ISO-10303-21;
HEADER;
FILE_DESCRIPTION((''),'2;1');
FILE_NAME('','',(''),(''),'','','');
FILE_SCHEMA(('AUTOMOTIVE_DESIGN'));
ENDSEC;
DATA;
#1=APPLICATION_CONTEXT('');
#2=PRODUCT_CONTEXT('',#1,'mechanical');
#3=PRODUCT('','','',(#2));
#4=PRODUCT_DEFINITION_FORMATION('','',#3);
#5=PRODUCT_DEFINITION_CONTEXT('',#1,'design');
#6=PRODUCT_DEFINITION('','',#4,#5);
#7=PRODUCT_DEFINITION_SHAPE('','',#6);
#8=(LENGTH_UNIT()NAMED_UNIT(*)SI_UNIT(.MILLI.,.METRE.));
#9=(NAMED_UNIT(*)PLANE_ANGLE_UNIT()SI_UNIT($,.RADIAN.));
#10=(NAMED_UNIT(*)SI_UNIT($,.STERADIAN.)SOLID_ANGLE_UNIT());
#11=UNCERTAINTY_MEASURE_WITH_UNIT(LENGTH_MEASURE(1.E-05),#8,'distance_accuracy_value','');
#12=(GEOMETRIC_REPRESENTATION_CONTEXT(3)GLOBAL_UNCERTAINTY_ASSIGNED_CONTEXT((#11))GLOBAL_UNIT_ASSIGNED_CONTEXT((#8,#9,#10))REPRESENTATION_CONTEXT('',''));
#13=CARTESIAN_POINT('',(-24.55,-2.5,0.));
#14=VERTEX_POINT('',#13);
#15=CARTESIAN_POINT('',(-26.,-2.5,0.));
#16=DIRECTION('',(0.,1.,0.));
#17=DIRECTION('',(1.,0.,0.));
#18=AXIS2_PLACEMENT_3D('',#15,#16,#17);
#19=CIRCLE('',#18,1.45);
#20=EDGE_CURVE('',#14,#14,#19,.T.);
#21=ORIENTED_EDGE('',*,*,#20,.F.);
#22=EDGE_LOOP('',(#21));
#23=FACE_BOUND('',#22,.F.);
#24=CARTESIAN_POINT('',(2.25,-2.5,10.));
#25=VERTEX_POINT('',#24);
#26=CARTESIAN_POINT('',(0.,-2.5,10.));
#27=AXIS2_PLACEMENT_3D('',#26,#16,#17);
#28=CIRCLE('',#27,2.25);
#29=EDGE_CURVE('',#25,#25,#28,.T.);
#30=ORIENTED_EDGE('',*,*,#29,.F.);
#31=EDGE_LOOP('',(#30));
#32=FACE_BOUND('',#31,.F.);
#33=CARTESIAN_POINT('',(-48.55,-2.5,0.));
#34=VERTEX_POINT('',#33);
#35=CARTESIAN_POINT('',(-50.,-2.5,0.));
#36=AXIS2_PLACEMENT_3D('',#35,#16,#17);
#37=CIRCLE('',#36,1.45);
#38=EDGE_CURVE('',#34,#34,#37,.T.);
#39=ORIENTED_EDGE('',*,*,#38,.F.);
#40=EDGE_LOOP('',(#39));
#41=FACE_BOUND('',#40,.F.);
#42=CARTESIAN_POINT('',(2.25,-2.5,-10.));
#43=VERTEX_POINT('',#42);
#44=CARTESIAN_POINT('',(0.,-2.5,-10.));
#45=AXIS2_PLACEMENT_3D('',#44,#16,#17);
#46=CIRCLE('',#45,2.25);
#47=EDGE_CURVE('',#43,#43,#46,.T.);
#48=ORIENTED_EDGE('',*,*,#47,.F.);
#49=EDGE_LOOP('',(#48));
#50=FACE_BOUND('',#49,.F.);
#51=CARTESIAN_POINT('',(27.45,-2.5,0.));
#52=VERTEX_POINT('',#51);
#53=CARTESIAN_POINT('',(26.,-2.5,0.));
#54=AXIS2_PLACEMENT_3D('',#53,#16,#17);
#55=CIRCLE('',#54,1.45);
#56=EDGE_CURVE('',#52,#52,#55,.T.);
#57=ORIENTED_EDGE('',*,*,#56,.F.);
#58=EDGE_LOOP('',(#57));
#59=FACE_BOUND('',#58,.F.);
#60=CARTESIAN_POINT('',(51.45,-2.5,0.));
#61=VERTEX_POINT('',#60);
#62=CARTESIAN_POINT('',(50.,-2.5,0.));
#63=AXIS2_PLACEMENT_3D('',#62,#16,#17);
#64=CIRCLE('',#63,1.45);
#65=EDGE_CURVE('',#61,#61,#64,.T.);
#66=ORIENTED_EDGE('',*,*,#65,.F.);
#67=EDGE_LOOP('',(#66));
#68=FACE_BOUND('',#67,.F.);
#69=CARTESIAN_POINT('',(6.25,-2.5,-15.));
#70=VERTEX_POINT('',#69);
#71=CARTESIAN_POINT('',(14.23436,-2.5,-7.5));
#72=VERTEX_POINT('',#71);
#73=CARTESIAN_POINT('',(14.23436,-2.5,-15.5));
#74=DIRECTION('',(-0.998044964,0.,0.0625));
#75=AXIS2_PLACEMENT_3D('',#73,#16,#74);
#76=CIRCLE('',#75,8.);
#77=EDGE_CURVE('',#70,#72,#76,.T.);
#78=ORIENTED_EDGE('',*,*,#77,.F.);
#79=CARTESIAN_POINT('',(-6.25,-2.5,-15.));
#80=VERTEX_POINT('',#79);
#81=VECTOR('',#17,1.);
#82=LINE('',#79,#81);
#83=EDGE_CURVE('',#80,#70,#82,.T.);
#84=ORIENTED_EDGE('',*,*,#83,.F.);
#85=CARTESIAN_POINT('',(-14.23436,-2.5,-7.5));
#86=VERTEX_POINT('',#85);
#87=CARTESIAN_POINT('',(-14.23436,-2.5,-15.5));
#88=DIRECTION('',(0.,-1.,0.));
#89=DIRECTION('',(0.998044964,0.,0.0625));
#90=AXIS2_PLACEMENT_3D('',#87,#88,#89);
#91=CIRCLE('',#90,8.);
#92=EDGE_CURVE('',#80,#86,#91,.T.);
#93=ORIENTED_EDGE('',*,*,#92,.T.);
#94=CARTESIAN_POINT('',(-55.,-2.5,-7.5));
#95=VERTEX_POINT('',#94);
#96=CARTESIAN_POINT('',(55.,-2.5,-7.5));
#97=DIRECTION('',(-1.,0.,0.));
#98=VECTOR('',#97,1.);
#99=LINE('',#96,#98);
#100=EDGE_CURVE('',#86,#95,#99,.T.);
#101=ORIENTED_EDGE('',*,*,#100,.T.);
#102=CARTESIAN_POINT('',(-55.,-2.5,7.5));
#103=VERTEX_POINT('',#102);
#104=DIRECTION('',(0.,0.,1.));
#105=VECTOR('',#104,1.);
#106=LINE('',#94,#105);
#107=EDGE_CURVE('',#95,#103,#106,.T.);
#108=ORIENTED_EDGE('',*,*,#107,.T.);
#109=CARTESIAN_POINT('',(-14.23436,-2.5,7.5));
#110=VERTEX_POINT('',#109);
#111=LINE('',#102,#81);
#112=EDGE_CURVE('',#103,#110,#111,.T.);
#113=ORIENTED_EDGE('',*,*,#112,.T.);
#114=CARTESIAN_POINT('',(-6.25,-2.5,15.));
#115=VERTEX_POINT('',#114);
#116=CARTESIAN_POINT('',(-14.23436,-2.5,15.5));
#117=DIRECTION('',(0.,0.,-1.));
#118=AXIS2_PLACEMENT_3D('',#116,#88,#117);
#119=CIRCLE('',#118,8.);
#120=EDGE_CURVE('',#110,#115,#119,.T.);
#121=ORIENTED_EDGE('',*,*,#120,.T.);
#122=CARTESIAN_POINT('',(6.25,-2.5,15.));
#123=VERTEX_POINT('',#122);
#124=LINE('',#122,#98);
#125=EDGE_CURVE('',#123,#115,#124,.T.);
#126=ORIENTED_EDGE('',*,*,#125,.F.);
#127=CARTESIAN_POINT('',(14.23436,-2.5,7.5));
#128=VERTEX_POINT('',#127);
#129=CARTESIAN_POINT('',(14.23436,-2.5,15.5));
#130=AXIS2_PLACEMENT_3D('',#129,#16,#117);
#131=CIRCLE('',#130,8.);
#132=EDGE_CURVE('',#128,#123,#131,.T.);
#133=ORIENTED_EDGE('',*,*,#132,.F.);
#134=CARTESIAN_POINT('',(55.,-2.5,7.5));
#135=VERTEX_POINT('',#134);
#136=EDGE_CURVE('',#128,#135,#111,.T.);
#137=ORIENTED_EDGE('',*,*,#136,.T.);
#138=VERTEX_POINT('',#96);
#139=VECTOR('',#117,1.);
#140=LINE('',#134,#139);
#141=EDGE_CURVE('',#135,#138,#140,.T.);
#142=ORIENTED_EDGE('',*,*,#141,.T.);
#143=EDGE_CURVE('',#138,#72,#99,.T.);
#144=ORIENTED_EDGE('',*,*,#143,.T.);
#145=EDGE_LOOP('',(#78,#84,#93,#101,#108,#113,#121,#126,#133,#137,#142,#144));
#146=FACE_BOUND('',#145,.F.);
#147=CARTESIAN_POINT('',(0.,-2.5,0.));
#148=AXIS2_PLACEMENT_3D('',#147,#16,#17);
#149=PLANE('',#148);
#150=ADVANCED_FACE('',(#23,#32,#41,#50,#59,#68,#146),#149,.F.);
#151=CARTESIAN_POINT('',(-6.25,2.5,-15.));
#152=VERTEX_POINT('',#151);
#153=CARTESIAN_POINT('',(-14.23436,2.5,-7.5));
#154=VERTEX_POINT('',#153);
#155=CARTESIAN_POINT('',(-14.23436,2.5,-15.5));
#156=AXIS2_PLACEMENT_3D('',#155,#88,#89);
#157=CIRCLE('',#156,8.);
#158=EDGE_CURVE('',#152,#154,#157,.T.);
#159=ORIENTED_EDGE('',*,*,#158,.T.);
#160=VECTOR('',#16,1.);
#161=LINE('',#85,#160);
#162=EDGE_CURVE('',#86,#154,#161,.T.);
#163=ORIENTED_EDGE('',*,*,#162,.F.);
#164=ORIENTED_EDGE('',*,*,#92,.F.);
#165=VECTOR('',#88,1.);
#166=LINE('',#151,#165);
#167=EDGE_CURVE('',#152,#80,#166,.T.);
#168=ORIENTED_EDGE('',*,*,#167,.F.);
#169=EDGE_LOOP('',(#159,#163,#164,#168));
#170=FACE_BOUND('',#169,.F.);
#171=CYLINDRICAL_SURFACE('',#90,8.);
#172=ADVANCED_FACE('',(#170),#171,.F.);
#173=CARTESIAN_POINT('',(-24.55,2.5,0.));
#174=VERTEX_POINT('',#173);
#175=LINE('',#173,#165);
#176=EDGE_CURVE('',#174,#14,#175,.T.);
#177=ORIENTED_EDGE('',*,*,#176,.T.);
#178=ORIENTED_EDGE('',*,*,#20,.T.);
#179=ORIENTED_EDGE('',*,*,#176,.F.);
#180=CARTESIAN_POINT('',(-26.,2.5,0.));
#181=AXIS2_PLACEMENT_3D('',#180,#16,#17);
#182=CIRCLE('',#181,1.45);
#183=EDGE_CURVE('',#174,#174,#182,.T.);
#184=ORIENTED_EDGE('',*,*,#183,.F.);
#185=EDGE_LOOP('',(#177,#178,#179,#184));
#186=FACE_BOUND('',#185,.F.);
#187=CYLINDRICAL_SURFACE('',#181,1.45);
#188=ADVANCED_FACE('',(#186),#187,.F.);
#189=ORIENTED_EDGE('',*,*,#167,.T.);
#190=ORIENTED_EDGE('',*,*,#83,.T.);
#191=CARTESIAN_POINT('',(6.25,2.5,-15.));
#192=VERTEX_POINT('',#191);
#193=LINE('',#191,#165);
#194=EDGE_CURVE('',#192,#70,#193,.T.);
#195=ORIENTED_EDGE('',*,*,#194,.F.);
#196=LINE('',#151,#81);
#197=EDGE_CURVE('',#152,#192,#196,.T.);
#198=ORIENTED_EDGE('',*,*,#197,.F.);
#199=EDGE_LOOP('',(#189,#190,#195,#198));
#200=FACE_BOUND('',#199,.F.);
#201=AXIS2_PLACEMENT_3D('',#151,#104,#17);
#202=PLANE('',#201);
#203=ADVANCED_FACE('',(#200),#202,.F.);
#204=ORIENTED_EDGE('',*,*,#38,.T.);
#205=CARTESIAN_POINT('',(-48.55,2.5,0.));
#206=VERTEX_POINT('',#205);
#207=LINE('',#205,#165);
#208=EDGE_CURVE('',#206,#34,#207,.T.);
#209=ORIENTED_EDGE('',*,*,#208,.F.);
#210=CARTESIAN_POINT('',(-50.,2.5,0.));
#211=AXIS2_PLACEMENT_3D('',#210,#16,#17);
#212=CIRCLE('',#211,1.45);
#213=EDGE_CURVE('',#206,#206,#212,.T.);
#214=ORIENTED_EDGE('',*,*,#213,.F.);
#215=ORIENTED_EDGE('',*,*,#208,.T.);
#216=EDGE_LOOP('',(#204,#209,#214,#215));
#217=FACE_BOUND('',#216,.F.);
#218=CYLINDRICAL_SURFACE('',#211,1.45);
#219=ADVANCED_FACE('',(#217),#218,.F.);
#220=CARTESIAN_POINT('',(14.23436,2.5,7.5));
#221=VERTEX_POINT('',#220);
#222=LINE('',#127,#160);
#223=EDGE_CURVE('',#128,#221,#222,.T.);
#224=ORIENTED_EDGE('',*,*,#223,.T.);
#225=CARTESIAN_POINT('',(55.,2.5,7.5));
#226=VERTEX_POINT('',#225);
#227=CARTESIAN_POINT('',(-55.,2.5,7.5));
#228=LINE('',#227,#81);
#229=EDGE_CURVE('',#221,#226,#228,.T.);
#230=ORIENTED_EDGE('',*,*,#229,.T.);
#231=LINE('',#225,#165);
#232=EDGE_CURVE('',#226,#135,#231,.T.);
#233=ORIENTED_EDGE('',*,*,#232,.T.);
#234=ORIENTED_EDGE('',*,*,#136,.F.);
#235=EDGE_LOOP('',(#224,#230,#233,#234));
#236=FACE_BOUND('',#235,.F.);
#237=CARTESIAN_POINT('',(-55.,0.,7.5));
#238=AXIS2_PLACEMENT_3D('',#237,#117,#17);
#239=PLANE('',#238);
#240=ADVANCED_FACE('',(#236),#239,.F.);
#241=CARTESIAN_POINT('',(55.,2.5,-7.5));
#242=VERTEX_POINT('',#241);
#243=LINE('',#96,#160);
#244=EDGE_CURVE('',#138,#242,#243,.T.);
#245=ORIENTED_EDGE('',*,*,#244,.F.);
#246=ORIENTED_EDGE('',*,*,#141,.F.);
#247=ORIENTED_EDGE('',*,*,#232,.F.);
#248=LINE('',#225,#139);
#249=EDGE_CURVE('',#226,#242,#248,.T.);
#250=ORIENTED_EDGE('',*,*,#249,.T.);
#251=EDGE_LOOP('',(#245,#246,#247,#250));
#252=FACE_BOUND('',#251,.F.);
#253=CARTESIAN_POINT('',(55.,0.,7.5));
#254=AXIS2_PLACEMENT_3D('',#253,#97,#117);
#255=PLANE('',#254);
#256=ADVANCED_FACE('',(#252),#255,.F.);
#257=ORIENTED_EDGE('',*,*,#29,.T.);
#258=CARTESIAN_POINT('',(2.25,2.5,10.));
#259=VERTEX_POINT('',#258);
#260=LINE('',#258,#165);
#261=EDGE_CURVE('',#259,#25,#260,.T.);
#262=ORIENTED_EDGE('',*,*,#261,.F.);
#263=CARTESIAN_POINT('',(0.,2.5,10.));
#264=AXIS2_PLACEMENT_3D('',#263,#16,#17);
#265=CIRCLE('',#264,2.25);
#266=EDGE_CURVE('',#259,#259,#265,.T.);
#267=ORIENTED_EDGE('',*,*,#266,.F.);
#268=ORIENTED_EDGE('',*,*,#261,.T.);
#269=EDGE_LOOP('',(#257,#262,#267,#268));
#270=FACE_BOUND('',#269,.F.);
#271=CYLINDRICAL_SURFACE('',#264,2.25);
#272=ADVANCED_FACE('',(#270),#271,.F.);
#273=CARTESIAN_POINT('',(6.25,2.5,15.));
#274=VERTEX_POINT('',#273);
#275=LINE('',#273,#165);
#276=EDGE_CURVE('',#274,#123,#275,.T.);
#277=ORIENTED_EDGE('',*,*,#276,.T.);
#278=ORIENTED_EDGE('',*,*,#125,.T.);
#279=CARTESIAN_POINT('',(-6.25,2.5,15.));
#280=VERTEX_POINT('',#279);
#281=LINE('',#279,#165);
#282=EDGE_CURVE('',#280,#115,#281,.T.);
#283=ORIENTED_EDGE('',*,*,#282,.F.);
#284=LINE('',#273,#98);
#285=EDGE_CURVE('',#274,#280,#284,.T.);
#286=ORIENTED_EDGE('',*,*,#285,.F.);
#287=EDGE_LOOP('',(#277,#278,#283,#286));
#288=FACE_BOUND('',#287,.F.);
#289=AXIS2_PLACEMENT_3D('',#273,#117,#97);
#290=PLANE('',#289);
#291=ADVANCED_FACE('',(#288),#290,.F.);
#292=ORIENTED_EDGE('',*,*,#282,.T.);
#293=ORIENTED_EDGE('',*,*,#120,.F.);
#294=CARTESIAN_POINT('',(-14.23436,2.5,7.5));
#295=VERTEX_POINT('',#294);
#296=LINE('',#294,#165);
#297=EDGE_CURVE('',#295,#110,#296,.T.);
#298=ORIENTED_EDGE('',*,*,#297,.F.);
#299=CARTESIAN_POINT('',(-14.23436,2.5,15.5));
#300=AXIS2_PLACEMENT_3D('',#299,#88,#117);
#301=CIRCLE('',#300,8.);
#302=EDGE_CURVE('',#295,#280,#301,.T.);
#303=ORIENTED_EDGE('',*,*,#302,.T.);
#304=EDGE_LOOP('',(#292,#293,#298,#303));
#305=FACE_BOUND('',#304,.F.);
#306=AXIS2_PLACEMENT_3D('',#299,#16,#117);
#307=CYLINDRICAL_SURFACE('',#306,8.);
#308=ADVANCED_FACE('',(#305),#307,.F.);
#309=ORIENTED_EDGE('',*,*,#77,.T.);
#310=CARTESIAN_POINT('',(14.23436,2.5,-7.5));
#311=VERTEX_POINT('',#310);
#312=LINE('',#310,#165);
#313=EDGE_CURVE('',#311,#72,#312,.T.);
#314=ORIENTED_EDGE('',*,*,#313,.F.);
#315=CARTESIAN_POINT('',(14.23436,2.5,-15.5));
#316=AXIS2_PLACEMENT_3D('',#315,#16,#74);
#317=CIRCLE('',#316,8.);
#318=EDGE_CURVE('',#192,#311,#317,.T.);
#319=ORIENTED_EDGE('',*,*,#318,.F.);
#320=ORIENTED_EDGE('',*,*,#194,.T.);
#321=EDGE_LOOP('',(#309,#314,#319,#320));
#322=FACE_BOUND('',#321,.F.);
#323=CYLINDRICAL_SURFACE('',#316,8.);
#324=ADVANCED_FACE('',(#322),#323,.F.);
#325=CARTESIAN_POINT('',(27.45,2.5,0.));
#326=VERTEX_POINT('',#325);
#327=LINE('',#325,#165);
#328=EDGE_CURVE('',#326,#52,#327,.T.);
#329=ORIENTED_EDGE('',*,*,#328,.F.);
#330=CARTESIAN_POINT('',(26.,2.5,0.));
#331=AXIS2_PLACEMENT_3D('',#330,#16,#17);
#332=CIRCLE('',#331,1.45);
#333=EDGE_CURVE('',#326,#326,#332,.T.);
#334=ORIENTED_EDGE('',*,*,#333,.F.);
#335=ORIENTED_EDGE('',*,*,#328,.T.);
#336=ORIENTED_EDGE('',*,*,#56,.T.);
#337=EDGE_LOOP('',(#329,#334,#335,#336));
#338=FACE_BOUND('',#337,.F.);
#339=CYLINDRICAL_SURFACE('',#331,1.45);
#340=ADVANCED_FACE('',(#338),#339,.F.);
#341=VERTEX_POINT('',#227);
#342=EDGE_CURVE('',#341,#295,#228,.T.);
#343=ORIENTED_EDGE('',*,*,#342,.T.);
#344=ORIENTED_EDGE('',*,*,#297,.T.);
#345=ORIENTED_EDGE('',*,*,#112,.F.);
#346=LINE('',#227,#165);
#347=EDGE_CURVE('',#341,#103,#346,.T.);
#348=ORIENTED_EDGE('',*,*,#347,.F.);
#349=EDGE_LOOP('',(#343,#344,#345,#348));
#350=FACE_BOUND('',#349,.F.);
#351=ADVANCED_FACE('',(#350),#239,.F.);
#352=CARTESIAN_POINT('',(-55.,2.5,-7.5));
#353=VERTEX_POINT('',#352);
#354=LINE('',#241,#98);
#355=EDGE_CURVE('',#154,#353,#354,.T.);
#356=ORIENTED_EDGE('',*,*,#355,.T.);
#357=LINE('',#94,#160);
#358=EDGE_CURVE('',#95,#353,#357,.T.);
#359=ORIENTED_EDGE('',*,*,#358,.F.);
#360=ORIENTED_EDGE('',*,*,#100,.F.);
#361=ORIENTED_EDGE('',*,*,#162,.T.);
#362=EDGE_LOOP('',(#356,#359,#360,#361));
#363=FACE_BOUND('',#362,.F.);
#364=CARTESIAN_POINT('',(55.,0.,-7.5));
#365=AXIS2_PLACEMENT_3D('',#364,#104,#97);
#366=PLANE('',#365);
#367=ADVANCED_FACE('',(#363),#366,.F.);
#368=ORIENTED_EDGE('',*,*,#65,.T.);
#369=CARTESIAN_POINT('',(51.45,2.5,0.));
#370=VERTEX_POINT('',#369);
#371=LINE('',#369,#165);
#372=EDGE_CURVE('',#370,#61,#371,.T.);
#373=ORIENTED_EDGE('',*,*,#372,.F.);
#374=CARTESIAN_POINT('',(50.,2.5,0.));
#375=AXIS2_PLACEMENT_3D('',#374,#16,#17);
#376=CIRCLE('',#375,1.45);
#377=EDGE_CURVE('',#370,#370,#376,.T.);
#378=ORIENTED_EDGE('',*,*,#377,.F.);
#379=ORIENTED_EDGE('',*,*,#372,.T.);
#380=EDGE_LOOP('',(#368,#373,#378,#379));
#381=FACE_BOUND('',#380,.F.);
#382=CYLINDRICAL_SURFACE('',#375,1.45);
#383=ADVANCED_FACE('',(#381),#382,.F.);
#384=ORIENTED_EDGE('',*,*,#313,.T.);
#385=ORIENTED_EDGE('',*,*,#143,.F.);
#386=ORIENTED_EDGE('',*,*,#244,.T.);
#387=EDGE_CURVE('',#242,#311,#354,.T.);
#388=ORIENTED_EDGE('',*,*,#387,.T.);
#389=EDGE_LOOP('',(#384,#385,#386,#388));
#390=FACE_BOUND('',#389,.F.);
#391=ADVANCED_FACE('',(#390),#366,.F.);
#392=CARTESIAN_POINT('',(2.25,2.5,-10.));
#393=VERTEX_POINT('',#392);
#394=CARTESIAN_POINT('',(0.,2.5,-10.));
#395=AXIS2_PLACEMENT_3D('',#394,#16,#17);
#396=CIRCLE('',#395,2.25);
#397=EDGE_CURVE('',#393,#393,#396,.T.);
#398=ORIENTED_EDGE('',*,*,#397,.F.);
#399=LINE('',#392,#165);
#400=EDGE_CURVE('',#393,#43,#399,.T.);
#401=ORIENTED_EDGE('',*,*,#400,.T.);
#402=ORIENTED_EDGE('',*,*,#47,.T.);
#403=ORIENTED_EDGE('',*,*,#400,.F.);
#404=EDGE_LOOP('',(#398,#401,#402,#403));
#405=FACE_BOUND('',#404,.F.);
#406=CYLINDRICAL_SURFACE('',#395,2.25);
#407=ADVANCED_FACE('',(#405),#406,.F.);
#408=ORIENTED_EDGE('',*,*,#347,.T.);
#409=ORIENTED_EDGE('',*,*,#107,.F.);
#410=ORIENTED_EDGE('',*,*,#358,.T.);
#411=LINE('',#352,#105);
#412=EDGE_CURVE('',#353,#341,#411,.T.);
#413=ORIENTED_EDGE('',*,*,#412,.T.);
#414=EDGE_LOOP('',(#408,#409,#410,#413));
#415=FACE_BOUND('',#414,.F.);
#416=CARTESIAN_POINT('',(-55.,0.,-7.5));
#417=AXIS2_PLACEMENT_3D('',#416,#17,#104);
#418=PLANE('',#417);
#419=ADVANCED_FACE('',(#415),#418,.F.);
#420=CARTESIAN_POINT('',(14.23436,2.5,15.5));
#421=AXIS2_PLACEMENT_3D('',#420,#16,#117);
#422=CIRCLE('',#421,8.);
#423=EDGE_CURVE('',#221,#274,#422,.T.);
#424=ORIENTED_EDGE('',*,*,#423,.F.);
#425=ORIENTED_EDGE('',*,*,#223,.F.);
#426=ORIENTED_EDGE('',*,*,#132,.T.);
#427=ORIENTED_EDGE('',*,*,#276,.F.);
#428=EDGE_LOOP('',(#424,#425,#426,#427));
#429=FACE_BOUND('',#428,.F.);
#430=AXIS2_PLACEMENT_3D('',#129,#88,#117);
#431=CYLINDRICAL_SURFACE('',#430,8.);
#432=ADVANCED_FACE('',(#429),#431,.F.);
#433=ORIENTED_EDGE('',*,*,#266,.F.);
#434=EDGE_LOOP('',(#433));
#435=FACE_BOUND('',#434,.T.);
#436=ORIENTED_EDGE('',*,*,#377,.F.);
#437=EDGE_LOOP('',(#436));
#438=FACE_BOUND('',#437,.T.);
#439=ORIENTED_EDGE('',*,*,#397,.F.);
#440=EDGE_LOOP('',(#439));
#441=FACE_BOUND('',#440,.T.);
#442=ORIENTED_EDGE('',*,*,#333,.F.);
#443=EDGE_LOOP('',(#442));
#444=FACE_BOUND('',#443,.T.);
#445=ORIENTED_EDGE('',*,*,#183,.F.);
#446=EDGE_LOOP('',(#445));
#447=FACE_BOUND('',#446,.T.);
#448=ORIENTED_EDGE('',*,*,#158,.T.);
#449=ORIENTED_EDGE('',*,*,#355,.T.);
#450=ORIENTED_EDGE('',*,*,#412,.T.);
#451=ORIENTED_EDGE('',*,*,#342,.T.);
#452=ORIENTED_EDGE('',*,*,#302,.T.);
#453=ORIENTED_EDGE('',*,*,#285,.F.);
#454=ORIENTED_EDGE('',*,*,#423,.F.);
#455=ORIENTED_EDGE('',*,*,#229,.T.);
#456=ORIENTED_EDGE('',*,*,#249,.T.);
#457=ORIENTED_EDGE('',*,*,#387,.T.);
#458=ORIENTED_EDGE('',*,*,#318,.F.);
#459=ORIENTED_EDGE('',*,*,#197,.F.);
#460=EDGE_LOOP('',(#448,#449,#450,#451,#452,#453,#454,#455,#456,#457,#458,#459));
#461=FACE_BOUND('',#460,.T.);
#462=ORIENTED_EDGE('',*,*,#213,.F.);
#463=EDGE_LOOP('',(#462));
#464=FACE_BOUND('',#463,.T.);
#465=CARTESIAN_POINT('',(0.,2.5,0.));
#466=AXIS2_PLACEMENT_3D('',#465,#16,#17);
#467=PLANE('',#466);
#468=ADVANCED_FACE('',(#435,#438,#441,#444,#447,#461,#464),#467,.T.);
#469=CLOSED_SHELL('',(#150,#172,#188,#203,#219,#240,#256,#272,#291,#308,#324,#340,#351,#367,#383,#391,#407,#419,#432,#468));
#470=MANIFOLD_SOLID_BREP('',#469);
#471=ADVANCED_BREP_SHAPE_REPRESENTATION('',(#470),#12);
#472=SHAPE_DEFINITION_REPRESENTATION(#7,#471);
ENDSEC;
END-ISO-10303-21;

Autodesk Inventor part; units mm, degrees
ref_plane "YZ Plane" through (0, 0, 0) normal (1, 0, 0) x (0, 1, 0)
ref_plane "XZ Plane" through (0, 0, 0) normal (0, 1, 0) x (-1, 0, 0)
ref_plane "XY Plane" through (0, 0, 0) normal (0, 0, 1) x (1, 0, 0)
sketch "スケッチ1" plane through (0, 0, 0) normal (0, 1, 0) x (-1, 0, 0)
  line L0 (-55, -7.5) -> (55, -7.5)
  line L1 (55, -7.5) -> (55, 7.5)
  line L2 (55, 7.5) -> (-55, 7.5)
  line L3 (-55, 7.5) -> (-55, -7.5)
  line L4 (-55, -7.5) -> (55, 7.5) construction
  line L5 (55, -7.5) -> (-55, 7.5) construction
  point P0 (0, 0)
  dimension "d0" = 110
  dimension "d1" = 15
extrude "押し出し1" add sketch "スケッチ1" along normal mid plane 5
sketch "スケッチ2" plane through (0, 2.5, 0) normal (0, 1, 0) x (1, 0, 0)
  circle A0 centre (50, 0) radius 1.45
  circle A1 centre (-50, 0) radius 1.45
  point P0 (0, 0)
  dimension "d4" = 2.9
  dimension "d5" = 2.9
extrude "押し出し2" cut sketch "スケッチ2" against normal blind 5
sketch "スケッチ3" plane through (0, 2.5, 0) normal (0, 1, 0) x (1, 0, 0)
  circle A0 centre (26, 0) radius 1.45
  circle A1 centre (-26, 0) radius 1.45
  point P0 (0, 0)
  dimension "d8" = 2.9
  dimension "d9" = 2.9
extrude "押し出し3" cut sketch "スケッチ3" against normal blind 5
sketch "スケッチ4" plane through (0, 2.5, 0) normal (0, 1, 0) x (1, 0, 0)
  line L0 (-6.25, 15) -> (6.25, 15)
  line L1 (6.25, 15) -> (6.25, -15)
  line L2 (6.25, -15) -> (-6.25, -15)
  line L3 (-6.25, -15) -> (-6.25, 15)
  line L4 (-6.25, 15) -> (6.25, -15) construction
  line L5 (6.25, 15) -> (-6.25, -15) construction
  point P0 (0, 0)
  dimension "d12" = 12.5
  dimension "d13" = 30
extrude "押し出し4" add sketch "スケッチ4" against normal blind 5
fillet "フィレット1" radius 8 4 edges at (6.25, 0, 7.5) (-6.25, 0, 7.5) (-6.25, 0, -7.5) (6.25, 0, -7.5)
sketch "スケッチ5" plane through (0, 2.5, 0) normal (0, 1, 0) x (1, 0, 0)
  circle A0 centre (0, -10) radius 2.25
  circle A1 centre (0, 10) radius 2.25
  point P0 (0, 0)
  dimension "d17" = 4.5
  dimension "d18" = 4.5
extrude "押し出し5" cut sketch "スケッチ5" against normal blind 5
properties part number "board2"
